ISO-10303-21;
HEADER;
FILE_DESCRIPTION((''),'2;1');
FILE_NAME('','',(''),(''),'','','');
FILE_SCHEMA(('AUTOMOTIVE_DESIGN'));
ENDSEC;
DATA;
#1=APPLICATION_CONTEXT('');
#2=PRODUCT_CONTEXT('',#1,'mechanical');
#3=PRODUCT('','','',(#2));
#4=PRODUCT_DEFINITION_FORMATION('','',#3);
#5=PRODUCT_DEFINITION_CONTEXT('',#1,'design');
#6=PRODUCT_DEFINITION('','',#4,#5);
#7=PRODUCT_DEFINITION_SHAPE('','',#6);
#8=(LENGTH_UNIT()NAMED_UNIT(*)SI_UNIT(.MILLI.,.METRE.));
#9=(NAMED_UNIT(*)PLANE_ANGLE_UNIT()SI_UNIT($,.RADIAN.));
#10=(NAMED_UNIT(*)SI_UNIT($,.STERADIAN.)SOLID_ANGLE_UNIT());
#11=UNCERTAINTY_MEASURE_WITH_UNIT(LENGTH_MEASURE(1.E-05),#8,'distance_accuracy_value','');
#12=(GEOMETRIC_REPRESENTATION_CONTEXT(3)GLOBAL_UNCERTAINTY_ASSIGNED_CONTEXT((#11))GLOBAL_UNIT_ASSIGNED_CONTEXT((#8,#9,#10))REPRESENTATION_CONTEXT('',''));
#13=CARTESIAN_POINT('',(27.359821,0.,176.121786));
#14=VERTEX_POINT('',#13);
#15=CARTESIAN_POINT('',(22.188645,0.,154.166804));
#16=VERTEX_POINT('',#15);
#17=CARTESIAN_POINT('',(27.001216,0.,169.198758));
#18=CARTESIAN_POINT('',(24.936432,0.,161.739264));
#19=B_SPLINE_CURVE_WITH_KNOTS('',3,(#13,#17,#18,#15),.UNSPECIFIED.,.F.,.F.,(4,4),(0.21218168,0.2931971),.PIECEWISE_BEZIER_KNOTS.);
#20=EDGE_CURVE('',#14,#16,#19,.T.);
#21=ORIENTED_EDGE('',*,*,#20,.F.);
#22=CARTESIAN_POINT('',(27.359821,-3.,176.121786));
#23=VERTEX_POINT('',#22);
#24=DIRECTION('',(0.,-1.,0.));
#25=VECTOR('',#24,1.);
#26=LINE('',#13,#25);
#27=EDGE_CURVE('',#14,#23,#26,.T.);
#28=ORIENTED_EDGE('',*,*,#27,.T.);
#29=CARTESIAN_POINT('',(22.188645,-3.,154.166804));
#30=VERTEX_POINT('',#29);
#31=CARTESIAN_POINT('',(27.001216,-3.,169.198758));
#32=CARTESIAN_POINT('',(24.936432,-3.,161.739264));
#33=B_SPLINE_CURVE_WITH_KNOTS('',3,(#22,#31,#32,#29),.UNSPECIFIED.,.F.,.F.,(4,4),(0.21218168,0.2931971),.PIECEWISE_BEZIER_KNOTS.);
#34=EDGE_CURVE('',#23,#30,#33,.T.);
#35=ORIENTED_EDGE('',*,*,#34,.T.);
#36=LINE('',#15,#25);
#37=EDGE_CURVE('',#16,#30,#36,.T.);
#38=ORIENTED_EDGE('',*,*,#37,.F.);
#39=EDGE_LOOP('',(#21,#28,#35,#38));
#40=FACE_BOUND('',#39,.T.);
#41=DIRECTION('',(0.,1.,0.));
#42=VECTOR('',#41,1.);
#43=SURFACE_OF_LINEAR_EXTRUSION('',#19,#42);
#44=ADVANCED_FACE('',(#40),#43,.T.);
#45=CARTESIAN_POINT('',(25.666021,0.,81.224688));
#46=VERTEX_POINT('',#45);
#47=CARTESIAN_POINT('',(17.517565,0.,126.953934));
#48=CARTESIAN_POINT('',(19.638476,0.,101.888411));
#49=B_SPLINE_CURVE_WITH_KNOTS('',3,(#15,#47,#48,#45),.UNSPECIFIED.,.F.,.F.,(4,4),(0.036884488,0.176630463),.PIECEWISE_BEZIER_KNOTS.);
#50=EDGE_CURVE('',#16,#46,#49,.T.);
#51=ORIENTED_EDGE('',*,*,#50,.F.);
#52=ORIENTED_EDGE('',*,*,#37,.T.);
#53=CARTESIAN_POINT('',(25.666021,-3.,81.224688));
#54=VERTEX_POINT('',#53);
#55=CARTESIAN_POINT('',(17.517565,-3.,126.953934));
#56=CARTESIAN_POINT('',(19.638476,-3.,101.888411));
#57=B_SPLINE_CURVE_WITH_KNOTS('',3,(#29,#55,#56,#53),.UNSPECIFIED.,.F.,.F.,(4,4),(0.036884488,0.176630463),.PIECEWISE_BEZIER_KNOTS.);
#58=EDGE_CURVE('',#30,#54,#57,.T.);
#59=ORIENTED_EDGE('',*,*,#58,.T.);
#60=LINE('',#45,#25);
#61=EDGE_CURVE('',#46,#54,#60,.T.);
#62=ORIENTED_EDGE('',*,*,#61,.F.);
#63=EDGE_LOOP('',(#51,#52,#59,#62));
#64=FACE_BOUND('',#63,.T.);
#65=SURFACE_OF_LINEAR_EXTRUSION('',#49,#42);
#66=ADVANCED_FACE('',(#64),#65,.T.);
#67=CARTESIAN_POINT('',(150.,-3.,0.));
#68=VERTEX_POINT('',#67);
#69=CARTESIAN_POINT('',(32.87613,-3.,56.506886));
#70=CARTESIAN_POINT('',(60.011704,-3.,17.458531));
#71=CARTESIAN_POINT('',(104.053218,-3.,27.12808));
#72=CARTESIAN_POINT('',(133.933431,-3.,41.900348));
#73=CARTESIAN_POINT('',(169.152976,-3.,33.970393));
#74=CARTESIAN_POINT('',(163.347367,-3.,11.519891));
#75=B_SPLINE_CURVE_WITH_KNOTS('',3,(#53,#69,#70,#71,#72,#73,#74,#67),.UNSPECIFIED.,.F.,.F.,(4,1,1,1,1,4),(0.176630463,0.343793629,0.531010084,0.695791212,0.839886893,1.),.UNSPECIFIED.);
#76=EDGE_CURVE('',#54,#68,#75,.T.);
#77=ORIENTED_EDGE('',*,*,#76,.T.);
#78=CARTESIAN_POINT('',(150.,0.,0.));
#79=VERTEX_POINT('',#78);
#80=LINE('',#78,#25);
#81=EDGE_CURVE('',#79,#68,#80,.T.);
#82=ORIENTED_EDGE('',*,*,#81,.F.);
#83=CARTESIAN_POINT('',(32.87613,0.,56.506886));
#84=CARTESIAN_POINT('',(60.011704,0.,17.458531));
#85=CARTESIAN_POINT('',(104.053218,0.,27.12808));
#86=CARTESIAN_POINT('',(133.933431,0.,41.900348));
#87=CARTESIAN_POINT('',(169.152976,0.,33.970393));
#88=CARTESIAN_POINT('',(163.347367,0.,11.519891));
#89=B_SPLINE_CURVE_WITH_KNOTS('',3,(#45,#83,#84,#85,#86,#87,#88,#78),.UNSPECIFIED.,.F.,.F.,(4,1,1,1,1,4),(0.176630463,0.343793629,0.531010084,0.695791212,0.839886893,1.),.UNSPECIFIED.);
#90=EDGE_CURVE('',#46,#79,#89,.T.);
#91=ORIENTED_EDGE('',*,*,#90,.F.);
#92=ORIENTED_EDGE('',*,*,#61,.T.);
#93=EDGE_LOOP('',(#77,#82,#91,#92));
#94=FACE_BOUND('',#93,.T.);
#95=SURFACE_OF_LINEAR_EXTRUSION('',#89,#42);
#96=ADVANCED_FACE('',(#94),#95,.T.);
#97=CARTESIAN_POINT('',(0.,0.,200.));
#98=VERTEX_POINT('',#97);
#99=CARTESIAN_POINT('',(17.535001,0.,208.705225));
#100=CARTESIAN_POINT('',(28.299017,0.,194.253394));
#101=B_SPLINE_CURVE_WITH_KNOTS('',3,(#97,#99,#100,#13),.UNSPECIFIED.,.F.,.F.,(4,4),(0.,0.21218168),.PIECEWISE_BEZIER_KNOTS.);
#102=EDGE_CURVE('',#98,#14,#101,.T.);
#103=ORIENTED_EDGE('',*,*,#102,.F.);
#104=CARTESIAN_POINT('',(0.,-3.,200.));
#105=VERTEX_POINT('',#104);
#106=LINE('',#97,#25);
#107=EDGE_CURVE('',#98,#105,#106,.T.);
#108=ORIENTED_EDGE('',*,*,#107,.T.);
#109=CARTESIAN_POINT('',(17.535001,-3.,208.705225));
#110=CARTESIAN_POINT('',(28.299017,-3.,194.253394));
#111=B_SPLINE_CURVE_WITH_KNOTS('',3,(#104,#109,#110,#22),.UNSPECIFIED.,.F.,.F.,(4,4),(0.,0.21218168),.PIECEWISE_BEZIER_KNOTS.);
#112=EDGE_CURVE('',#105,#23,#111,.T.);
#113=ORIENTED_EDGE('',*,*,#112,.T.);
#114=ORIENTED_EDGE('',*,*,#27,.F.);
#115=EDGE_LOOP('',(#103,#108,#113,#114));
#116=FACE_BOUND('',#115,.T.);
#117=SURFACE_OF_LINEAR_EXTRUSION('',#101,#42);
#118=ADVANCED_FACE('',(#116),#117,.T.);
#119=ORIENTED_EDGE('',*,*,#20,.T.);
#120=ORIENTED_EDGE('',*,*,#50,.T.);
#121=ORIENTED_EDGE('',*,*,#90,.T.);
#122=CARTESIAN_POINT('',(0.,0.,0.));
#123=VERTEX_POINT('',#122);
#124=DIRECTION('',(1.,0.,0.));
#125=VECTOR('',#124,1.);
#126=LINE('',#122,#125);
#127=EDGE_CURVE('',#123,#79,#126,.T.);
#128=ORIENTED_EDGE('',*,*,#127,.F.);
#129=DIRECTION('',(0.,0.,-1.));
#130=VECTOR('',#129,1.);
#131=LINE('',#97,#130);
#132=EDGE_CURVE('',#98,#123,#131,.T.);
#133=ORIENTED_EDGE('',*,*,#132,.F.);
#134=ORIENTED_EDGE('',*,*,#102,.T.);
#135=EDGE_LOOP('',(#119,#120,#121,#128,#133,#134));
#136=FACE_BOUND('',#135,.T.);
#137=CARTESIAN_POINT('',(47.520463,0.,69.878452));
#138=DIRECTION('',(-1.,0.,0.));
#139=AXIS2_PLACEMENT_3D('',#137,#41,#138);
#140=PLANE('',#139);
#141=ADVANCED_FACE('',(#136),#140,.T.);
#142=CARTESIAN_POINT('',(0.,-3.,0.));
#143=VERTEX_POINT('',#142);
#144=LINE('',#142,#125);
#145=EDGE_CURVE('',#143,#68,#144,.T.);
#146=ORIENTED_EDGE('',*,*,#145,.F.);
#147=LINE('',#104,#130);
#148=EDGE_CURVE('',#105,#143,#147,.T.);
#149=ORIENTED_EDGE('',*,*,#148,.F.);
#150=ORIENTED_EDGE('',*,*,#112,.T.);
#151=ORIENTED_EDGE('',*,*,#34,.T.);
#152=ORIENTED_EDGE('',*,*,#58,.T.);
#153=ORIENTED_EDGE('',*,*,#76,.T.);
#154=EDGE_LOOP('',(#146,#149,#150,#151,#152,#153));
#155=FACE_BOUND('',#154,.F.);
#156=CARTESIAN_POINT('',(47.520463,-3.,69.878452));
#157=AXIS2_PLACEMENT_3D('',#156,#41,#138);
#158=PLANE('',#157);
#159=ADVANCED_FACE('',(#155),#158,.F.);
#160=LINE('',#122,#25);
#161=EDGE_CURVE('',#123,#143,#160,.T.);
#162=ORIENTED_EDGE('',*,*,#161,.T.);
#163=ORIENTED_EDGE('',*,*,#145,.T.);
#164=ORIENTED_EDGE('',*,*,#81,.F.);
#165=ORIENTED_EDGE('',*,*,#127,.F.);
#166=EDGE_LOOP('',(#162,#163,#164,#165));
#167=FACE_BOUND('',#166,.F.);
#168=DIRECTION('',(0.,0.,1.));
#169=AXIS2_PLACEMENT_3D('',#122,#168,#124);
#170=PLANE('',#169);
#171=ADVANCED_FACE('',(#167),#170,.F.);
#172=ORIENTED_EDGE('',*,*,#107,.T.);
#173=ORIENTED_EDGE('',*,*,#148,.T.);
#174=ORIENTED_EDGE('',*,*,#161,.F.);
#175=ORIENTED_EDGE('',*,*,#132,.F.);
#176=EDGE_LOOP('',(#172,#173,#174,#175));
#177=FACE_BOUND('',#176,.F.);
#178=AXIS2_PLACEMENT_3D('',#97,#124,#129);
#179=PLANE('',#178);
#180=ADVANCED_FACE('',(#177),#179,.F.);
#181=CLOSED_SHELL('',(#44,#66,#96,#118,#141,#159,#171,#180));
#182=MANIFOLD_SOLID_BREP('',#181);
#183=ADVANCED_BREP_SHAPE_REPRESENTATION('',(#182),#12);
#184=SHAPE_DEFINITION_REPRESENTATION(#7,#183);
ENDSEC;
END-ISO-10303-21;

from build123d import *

# Parameters (mm, degrees)
F1_DEPTH = 3


with BuildPart() as f1:
    # F0 (on Front) → F1 (new body)
    with BuildSketch(Plane.XZ):
        with BuildLine():
            add(Edge.make_bspline(
                [(0, 200), (17.5350010591, 208.7052251042), (28.2990167117, 194.2533942124), (27.3598209023, 176.1217862368)],
                knots=[0, 0, 0, 0, 0.2121816796, 0.2121816796, 0.2121816796, 0.2121816796], degree=3))
            Line((0, 200), (0, 0))
            Line((0, 0), (150, 0))
            add(Edge.make_bspline(
                [(25.6660213946, 81.2246880313), (32.8761299375, 56.5068863186), (60.0117036649, 17.4585313325), (104.0532180707, 27.1280796833), (133.9334309453, 41.9003481082), (169.1529761494, 33.9703926018), (163.3473671479, 11.5198906648), (150, 0)],
                knots=[0.1766304626, 0.1766304626, 0.1766304626, 0.1766304626, 0.3437936291, 0.5310100844, 0.6957912123, 0.8398868931, 1, 1, 1, 1], degree=3))
            add(Edge.make_bspline(
                [(22.1886454738, 154.1668037154), (13.9805728557, 131.5466692926), (-6.7542086215, 97.2923947246), (17.0207337498, 84.6439779907), (25.666021385, 81.2246880244)],
                knots=[0.2931971005, 0.2931971005, 0.2931971005, 0.2931971005, 0.5352029466, 0.6440385187, 0.6440385187, 0.6440385187, 0.6440385187], degree=3))
            add(Edge.make_bspline(
                [(27.3598209023, 176.1217862368), (25.1275690328, 168.6815010828), (23.4215283398, 161.3493559456), (22.1886454738, 154.1668037154)],
                knots=[0, 0, 0, 0, 0.0368844878, 0.0368844878, 0.0368844878, 0.0368844878], degree=3))
        make_face()
        with BuildLine():
            add(Edge.make_bspline(
                [(27.3598209023, 176.1217862368), (27.0012162201, 169.1987575651), (24.9364322264, 161.7392642187), (22.1886454738, 154.1668037154)],
                knots=[0.2121816796, 0.2121816796, 0.2121816796, 0.2121816796, 0.2931971005, 0.2931971005, 0.2931971005, 0.2931971005], degree=3))
            add(Edge.make_bspline(
                [(27.3598209023, 176.1217862368), (25.1275690328, 168.6815010828), (23.4215283398, 161.3493559456), (22.1886454738, 154.1668037154)],
                knots=[0, 0, 0, 0, 0.0368844878, 0.0368844878, 0.0368844878, 0.0368844878], degree=3))
        make_face()
        with BuildLine():
            add(Edge.make_bspline(
                [(22.1886454738, 154.1668037154), (17.5175648086, 126.9539339651), (19.6384755701, 101.8884105841), (25.6660213946, 81.2246880313)],
                knots=[0.0368844878, 0.0368844878, 0.0368844878, 0.0368844878, 0.1766304626, 0.1766304626, 0.1766304626, 0.1766304626], degree=3))
            add(Edge.make_bspline(
                [(22.1886454738, 154.1668037154), (13.9805728557, 131.5466692926), (-6.7542086215, 97.2923947246), (17.0207337498, 84.6439779907), (25.666021385, 81.2246880244)],
                knots=[0.2931971005, 0.2931971005, 0.2931971005, 0.2931971005, 0.5352029466, 0.6440385187, 0.6440385187, 0.6440385187, 0.6440385187], degree=3))
        make_face()
    extrude(amount=F1_DEPTH)


solid = f1.part
